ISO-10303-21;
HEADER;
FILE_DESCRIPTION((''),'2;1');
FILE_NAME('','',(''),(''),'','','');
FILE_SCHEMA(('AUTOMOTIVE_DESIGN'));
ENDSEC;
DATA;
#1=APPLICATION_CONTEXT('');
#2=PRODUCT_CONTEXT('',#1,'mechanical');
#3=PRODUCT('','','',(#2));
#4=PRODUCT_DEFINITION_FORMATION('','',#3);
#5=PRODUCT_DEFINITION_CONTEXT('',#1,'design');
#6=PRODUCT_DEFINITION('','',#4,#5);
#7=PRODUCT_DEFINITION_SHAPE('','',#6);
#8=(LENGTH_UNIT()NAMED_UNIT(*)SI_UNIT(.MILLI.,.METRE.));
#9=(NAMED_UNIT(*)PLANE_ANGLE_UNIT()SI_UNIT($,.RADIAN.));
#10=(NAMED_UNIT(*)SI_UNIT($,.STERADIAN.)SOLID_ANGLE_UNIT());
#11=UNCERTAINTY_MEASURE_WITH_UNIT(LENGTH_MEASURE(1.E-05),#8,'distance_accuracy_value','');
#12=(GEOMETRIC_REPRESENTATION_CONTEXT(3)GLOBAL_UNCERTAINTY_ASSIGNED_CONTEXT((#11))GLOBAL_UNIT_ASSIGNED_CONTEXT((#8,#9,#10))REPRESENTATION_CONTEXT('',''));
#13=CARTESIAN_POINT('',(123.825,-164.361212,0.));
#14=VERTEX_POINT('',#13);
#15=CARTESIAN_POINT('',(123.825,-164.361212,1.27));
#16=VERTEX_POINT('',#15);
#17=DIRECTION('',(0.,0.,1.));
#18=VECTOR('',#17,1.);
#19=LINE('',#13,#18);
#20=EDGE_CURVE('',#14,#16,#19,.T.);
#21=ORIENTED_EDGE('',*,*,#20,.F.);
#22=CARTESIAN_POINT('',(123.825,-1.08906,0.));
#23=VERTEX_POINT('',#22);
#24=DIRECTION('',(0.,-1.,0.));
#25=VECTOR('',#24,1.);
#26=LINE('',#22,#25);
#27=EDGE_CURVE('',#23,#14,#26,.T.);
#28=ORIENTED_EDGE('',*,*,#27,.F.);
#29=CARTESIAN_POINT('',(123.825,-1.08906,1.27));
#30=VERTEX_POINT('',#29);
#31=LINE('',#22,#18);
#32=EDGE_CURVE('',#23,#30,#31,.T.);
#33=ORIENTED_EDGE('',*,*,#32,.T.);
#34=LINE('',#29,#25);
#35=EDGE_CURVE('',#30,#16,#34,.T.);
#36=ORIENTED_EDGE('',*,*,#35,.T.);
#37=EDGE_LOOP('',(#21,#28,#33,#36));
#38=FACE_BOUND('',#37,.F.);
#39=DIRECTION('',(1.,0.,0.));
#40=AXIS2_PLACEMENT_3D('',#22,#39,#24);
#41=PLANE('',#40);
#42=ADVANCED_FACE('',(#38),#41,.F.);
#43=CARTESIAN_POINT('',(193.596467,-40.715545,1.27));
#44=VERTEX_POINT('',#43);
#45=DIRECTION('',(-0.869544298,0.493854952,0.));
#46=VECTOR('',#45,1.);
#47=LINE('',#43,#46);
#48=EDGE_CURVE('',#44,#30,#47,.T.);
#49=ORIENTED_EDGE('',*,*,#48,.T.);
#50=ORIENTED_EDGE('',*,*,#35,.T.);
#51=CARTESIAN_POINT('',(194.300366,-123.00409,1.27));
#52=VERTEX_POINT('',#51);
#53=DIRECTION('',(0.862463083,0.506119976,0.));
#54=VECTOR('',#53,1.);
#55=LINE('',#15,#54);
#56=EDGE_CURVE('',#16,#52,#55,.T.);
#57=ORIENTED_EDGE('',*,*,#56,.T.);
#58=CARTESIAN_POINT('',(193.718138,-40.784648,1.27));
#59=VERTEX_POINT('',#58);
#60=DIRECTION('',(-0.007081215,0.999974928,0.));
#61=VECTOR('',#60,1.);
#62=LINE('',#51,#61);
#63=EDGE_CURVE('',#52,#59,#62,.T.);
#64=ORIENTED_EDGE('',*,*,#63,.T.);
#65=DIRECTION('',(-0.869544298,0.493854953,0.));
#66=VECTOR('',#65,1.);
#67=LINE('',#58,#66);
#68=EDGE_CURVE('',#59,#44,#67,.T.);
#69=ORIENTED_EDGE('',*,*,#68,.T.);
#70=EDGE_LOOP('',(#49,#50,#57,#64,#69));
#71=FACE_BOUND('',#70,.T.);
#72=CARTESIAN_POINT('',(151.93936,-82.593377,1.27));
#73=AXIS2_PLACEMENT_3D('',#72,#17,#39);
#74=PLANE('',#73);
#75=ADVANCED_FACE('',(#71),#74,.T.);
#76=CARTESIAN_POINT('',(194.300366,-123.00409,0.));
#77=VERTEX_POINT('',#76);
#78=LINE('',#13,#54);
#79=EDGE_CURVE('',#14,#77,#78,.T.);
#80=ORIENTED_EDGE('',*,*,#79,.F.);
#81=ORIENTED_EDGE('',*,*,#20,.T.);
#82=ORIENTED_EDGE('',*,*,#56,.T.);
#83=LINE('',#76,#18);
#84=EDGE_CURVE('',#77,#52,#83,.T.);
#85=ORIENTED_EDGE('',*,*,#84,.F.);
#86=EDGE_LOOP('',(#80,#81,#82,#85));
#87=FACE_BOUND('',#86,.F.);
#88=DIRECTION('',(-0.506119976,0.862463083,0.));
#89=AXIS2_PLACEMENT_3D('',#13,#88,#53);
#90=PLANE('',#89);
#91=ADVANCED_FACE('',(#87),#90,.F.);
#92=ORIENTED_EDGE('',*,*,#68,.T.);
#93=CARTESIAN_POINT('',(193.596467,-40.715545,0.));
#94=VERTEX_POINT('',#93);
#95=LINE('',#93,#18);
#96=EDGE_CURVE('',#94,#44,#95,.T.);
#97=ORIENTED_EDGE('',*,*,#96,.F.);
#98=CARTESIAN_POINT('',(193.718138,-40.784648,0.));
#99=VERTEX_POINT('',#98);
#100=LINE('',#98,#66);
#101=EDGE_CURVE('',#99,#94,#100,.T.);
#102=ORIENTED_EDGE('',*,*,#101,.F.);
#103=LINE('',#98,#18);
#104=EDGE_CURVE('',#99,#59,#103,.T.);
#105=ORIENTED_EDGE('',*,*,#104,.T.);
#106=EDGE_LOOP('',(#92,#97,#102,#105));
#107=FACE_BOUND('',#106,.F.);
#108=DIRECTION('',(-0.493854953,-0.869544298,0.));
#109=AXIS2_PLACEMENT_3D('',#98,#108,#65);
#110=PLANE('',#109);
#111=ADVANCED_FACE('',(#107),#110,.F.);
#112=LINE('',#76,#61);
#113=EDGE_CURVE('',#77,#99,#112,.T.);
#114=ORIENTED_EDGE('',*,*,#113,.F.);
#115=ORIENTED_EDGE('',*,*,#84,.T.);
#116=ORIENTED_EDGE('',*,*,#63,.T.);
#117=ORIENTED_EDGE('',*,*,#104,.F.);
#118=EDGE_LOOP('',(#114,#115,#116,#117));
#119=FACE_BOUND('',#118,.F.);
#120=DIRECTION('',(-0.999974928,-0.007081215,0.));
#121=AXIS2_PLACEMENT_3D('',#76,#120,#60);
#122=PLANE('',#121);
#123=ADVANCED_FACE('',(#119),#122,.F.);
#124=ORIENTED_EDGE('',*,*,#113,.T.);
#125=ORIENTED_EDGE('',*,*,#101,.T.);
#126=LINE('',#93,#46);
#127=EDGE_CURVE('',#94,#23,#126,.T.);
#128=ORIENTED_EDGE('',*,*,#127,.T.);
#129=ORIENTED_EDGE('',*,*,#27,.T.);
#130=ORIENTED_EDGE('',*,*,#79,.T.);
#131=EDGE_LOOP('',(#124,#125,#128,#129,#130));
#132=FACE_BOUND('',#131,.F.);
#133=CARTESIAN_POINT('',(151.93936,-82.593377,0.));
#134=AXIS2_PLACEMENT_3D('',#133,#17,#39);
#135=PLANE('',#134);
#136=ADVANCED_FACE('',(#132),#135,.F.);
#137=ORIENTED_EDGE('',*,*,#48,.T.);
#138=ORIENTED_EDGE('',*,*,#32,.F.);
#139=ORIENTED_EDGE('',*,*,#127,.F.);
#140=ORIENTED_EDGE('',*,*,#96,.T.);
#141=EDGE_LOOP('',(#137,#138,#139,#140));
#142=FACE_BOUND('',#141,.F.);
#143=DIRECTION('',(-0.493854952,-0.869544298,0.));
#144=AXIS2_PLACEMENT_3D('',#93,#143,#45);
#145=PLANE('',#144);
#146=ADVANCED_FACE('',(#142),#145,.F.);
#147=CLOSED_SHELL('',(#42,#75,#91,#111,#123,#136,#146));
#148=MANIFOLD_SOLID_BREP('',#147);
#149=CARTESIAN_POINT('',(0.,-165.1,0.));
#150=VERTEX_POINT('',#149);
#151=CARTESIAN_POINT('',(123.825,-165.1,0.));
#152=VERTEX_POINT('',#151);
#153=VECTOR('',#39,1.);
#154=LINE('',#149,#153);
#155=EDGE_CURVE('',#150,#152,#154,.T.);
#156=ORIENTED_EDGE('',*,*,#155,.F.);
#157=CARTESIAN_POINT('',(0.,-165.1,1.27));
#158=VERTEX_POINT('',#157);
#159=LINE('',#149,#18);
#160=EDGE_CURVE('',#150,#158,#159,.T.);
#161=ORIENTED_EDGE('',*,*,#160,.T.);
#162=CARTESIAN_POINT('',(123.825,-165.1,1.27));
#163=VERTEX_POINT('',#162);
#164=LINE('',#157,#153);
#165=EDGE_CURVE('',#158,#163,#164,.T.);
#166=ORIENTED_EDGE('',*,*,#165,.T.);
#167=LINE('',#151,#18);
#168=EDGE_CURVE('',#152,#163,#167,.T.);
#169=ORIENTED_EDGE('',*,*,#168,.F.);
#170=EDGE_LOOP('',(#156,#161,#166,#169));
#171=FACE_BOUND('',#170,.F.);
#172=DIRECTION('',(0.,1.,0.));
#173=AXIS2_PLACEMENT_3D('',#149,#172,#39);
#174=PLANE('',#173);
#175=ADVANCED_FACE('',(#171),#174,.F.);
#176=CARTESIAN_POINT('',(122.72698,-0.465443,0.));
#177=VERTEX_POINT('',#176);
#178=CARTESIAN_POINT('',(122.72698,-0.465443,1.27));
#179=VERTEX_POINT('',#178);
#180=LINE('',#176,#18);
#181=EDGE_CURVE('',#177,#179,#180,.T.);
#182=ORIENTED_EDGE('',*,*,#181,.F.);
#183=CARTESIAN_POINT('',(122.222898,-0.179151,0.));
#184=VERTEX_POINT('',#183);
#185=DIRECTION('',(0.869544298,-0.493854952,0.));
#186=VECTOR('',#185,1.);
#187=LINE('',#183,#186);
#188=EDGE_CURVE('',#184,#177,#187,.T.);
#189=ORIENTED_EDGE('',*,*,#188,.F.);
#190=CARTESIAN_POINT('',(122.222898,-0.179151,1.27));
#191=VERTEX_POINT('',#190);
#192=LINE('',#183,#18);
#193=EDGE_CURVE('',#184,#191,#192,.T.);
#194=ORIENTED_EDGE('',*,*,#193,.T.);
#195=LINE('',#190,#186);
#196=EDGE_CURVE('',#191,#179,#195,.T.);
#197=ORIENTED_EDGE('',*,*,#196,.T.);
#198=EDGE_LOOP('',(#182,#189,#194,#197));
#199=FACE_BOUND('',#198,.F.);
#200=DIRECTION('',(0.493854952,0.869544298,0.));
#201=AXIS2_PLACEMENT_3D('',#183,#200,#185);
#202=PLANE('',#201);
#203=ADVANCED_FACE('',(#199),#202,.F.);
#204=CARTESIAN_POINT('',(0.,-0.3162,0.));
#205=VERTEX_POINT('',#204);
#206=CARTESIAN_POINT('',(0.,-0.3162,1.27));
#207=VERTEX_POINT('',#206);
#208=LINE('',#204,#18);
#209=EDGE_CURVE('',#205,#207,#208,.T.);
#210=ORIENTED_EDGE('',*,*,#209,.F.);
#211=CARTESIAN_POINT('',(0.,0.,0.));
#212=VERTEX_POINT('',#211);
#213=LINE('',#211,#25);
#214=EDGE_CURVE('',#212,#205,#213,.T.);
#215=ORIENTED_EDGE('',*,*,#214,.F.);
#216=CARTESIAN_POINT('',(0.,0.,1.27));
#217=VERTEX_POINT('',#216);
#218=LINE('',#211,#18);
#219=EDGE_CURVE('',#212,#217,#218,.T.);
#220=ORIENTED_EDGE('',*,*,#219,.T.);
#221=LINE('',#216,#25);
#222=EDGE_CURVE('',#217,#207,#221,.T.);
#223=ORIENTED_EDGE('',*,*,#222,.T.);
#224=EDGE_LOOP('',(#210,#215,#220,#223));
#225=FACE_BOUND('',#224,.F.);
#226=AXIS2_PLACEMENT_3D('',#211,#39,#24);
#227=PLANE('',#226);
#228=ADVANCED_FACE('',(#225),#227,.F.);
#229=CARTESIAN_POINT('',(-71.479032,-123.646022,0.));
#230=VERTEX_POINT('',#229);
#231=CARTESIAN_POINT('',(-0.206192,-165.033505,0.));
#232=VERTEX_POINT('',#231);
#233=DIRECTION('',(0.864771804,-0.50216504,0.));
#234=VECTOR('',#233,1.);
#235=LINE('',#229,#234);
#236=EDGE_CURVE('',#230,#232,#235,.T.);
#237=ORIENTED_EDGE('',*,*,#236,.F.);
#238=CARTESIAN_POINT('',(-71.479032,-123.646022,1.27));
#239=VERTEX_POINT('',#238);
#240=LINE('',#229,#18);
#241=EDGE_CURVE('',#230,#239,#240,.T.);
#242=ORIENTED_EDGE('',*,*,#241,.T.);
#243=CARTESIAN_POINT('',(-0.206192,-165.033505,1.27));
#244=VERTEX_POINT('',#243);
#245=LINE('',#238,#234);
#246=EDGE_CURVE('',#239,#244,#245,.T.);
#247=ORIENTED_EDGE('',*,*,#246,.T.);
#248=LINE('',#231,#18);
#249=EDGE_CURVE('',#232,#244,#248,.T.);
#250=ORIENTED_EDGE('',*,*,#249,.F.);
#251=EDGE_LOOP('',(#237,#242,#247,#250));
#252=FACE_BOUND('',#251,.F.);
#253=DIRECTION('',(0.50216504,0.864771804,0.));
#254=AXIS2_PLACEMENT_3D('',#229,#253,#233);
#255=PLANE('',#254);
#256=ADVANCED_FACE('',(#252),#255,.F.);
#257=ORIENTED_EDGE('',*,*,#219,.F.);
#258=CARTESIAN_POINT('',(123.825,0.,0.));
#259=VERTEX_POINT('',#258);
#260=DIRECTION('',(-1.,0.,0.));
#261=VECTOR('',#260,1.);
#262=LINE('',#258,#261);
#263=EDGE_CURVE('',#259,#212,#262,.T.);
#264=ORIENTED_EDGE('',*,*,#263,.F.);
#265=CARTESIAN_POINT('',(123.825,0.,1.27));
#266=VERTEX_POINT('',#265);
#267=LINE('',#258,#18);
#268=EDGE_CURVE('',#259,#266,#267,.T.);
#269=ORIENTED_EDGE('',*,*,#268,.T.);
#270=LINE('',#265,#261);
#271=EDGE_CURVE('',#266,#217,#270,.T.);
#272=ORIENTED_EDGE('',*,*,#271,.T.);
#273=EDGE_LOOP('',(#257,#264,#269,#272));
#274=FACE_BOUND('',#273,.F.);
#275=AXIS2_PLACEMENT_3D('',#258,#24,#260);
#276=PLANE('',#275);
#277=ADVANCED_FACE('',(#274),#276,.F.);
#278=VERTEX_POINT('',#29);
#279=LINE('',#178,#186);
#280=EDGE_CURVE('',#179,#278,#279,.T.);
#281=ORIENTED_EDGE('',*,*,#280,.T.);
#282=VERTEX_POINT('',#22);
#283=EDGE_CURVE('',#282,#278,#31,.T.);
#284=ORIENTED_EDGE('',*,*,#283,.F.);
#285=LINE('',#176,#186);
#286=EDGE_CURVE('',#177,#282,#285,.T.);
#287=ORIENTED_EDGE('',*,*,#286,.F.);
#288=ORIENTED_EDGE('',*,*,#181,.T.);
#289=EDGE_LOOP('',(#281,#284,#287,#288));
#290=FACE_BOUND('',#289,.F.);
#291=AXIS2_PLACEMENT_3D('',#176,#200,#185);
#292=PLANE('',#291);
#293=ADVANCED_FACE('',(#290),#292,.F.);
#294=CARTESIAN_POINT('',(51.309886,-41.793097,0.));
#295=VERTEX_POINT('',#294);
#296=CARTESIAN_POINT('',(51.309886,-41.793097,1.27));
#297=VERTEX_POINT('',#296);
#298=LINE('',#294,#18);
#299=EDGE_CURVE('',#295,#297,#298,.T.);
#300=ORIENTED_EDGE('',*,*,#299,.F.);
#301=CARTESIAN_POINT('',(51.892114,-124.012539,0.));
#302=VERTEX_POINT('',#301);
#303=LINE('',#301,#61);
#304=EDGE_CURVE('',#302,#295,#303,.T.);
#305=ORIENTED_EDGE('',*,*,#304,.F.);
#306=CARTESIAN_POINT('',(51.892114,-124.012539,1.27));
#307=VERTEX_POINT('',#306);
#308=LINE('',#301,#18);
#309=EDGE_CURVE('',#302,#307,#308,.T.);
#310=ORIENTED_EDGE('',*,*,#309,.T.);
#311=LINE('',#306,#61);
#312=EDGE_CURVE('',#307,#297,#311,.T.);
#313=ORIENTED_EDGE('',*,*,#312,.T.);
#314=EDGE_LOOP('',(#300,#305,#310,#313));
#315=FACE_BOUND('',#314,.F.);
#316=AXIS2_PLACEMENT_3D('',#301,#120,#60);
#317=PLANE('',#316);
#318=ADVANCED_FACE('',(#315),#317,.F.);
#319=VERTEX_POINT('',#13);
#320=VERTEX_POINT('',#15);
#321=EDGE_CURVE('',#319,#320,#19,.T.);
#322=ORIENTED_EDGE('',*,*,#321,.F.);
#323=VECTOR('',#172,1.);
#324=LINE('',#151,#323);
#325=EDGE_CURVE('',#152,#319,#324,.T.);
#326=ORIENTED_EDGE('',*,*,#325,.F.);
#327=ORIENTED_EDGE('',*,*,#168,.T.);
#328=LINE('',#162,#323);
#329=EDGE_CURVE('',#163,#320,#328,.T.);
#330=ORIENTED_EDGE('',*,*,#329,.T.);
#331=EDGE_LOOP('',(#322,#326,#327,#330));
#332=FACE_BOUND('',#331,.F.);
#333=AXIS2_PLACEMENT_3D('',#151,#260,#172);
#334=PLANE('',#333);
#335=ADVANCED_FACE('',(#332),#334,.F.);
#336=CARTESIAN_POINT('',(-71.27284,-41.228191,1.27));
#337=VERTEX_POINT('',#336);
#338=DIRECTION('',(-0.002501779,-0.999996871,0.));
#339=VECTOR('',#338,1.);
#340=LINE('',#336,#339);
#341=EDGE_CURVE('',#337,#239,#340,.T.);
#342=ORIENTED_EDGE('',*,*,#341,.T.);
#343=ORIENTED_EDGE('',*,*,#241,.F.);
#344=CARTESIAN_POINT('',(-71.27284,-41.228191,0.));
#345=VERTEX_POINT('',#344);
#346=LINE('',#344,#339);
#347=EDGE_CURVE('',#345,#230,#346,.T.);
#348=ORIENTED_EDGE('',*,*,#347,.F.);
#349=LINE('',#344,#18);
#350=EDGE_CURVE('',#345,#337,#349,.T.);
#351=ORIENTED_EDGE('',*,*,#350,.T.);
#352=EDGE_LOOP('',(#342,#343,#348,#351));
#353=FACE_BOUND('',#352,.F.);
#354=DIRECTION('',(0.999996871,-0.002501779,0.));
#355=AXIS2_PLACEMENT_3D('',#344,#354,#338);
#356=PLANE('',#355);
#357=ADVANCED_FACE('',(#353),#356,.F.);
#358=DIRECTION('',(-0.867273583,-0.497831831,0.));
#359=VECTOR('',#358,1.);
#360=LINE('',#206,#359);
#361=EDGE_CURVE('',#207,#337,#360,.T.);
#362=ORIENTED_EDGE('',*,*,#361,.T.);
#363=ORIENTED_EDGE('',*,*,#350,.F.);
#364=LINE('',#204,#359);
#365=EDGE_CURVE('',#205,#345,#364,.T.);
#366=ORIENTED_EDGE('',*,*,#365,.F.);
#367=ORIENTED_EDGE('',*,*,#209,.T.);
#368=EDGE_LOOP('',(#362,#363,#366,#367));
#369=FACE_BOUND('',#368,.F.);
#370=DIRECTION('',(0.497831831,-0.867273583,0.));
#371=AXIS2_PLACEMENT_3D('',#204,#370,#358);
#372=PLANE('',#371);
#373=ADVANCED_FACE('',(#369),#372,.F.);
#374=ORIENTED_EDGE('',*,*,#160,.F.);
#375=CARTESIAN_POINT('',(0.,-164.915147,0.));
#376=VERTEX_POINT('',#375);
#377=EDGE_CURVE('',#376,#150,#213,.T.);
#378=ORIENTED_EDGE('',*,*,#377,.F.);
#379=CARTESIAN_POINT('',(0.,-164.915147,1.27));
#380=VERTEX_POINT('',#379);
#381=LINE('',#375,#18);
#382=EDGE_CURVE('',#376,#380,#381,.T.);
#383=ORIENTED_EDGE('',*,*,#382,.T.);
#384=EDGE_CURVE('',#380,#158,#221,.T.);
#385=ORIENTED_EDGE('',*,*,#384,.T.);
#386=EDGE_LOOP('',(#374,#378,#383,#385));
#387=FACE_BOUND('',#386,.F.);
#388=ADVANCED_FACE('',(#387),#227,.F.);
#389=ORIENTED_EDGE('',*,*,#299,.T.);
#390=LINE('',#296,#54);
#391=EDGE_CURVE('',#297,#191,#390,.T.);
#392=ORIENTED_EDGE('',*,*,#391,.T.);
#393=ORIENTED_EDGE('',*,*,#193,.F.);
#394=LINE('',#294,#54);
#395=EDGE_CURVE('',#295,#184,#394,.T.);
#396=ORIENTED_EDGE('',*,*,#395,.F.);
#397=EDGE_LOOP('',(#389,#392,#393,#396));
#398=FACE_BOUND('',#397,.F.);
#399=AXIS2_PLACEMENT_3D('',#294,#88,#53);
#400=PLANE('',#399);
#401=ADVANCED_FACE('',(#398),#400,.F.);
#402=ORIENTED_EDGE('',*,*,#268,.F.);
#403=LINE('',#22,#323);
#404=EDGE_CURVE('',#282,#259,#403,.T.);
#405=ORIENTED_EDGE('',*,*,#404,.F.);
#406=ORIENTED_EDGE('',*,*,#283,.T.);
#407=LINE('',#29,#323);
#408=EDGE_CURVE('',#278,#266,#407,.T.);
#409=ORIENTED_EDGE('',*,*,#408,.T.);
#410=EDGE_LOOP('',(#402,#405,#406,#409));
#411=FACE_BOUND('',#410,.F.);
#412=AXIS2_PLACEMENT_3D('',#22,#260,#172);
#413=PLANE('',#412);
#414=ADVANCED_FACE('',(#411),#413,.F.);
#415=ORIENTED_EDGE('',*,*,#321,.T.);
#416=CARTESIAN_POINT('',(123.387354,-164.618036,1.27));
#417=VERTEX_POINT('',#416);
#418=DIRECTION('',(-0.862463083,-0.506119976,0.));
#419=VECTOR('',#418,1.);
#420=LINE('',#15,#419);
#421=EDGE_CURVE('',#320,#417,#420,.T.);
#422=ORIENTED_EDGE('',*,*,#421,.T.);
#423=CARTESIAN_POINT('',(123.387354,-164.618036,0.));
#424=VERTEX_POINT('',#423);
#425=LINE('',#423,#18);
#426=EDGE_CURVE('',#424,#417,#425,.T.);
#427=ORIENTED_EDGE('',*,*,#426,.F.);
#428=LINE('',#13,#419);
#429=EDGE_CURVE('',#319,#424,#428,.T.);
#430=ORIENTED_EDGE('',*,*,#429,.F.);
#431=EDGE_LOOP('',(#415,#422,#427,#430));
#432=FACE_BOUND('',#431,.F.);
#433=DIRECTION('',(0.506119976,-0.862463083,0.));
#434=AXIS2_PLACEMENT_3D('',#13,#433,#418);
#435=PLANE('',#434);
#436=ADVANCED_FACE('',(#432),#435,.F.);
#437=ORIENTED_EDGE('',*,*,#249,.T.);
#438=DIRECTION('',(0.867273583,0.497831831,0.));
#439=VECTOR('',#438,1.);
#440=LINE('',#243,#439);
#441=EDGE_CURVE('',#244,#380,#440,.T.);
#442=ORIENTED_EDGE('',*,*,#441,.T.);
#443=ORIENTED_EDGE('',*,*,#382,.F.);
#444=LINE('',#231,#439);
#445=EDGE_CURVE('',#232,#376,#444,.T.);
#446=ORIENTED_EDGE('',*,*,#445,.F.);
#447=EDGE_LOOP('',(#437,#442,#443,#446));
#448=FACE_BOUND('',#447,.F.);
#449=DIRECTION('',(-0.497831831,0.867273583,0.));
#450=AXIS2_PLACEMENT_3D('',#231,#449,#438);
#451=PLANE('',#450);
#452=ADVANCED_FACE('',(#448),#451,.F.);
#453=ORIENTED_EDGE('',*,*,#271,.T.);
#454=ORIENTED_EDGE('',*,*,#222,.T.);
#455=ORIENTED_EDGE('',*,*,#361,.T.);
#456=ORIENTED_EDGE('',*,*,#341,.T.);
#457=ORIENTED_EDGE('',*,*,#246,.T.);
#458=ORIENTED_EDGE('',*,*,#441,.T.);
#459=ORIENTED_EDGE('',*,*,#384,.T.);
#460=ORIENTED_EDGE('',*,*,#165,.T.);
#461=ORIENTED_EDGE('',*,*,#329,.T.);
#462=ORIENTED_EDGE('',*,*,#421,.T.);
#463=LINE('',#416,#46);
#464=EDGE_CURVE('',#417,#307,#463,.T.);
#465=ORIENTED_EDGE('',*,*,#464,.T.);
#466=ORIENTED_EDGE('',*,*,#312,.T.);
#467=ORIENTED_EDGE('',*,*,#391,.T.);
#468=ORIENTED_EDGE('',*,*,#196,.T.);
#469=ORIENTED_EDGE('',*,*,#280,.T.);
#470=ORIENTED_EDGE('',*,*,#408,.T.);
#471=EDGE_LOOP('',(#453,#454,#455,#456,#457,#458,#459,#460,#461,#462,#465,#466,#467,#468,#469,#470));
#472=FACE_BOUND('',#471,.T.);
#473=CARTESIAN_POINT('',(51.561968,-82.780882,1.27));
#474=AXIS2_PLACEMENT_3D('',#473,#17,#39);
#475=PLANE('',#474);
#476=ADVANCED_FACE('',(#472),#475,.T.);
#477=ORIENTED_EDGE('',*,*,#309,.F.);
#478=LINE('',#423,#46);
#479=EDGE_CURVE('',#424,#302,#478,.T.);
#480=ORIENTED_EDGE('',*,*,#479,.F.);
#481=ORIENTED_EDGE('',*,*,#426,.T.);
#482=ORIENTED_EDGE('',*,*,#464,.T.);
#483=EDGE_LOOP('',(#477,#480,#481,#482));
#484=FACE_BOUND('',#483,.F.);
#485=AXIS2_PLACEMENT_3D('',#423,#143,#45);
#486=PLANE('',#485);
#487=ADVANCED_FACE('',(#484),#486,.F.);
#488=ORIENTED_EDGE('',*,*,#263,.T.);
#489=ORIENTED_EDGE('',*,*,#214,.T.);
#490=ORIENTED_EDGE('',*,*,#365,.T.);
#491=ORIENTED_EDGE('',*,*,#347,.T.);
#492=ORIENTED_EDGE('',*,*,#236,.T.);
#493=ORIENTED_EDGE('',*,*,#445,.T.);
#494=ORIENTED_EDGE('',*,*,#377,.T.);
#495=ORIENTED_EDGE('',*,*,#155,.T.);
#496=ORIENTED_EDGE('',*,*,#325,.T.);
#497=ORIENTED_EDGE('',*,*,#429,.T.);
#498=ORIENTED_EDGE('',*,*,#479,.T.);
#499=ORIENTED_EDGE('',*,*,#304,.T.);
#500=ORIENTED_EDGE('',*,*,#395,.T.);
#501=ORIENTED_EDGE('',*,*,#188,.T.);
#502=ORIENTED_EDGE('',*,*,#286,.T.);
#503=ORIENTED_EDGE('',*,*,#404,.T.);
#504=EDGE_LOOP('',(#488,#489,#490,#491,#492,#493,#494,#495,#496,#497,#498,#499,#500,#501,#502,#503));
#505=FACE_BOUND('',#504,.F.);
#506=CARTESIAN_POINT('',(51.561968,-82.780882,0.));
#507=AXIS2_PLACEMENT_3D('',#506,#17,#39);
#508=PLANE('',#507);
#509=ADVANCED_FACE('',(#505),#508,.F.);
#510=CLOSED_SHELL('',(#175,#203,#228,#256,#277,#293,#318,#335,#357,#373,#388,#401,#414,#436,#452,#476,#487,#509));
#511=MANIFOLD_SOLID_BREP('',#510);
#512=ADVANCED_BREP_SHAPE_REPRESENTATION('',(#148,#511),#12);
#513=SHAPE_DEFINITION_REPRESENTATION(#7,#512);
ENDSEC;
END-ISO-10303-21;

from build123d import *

# Parameters (mm, degrees)
F2_DEPTH = 1.27
F6_DEPTH = 1.27
F8_DEPTH = 1.27


with BuildPart() as f2:
    # F1 (on face) → F2 (new body)
    with BuildSketch(Plane.XY):
        Polygon((0, -0.3162004163), (-71.2728396538, -41.2281905004), (-71.4790315396, -123.6460217613), (-0.2061918858, -165.0335048029), (0, -164.9151466677), align=None)
    extrude(amount=F2_DEPTH)

    # F4 (on face) → F6 (join)
    with BuildSketch(Plane.XY):
        Polygon((51.3098860629, -41.7930965099), (122.2228978995, -0.1791509228), (122.7269796824, -0.4654425877), (122.7269796824, 0), (0, 0), (0, -165.1), (123.825, -165.1), (123.825, -164.361211811), (123.3873541232, -164.6180359287), (51.8921141747, -124.0125390129), align=None)
        Polygon((122.7269796824, 0), (122.7269796824, -0.4654425877), (123.825, -1.0890597775), (123.825, 0), align=None)
    extrude(amount=F6_DEPTH)


with BuildPart() as f8:
    # F7 (on face) → F8 (new body)
    with BuildSketch(Plane.XY):
        Polygon((123.825, -164.361211811), (194.3003659599, -123.0040903416), (193.718137848, -40.7846478386), (193.5964673758, -40.7155454761), (123.825, -1.0890597775), align=None)
    extrude(amount=F8_DEPTH)


solid = Compound([f2.part, f8.part])
